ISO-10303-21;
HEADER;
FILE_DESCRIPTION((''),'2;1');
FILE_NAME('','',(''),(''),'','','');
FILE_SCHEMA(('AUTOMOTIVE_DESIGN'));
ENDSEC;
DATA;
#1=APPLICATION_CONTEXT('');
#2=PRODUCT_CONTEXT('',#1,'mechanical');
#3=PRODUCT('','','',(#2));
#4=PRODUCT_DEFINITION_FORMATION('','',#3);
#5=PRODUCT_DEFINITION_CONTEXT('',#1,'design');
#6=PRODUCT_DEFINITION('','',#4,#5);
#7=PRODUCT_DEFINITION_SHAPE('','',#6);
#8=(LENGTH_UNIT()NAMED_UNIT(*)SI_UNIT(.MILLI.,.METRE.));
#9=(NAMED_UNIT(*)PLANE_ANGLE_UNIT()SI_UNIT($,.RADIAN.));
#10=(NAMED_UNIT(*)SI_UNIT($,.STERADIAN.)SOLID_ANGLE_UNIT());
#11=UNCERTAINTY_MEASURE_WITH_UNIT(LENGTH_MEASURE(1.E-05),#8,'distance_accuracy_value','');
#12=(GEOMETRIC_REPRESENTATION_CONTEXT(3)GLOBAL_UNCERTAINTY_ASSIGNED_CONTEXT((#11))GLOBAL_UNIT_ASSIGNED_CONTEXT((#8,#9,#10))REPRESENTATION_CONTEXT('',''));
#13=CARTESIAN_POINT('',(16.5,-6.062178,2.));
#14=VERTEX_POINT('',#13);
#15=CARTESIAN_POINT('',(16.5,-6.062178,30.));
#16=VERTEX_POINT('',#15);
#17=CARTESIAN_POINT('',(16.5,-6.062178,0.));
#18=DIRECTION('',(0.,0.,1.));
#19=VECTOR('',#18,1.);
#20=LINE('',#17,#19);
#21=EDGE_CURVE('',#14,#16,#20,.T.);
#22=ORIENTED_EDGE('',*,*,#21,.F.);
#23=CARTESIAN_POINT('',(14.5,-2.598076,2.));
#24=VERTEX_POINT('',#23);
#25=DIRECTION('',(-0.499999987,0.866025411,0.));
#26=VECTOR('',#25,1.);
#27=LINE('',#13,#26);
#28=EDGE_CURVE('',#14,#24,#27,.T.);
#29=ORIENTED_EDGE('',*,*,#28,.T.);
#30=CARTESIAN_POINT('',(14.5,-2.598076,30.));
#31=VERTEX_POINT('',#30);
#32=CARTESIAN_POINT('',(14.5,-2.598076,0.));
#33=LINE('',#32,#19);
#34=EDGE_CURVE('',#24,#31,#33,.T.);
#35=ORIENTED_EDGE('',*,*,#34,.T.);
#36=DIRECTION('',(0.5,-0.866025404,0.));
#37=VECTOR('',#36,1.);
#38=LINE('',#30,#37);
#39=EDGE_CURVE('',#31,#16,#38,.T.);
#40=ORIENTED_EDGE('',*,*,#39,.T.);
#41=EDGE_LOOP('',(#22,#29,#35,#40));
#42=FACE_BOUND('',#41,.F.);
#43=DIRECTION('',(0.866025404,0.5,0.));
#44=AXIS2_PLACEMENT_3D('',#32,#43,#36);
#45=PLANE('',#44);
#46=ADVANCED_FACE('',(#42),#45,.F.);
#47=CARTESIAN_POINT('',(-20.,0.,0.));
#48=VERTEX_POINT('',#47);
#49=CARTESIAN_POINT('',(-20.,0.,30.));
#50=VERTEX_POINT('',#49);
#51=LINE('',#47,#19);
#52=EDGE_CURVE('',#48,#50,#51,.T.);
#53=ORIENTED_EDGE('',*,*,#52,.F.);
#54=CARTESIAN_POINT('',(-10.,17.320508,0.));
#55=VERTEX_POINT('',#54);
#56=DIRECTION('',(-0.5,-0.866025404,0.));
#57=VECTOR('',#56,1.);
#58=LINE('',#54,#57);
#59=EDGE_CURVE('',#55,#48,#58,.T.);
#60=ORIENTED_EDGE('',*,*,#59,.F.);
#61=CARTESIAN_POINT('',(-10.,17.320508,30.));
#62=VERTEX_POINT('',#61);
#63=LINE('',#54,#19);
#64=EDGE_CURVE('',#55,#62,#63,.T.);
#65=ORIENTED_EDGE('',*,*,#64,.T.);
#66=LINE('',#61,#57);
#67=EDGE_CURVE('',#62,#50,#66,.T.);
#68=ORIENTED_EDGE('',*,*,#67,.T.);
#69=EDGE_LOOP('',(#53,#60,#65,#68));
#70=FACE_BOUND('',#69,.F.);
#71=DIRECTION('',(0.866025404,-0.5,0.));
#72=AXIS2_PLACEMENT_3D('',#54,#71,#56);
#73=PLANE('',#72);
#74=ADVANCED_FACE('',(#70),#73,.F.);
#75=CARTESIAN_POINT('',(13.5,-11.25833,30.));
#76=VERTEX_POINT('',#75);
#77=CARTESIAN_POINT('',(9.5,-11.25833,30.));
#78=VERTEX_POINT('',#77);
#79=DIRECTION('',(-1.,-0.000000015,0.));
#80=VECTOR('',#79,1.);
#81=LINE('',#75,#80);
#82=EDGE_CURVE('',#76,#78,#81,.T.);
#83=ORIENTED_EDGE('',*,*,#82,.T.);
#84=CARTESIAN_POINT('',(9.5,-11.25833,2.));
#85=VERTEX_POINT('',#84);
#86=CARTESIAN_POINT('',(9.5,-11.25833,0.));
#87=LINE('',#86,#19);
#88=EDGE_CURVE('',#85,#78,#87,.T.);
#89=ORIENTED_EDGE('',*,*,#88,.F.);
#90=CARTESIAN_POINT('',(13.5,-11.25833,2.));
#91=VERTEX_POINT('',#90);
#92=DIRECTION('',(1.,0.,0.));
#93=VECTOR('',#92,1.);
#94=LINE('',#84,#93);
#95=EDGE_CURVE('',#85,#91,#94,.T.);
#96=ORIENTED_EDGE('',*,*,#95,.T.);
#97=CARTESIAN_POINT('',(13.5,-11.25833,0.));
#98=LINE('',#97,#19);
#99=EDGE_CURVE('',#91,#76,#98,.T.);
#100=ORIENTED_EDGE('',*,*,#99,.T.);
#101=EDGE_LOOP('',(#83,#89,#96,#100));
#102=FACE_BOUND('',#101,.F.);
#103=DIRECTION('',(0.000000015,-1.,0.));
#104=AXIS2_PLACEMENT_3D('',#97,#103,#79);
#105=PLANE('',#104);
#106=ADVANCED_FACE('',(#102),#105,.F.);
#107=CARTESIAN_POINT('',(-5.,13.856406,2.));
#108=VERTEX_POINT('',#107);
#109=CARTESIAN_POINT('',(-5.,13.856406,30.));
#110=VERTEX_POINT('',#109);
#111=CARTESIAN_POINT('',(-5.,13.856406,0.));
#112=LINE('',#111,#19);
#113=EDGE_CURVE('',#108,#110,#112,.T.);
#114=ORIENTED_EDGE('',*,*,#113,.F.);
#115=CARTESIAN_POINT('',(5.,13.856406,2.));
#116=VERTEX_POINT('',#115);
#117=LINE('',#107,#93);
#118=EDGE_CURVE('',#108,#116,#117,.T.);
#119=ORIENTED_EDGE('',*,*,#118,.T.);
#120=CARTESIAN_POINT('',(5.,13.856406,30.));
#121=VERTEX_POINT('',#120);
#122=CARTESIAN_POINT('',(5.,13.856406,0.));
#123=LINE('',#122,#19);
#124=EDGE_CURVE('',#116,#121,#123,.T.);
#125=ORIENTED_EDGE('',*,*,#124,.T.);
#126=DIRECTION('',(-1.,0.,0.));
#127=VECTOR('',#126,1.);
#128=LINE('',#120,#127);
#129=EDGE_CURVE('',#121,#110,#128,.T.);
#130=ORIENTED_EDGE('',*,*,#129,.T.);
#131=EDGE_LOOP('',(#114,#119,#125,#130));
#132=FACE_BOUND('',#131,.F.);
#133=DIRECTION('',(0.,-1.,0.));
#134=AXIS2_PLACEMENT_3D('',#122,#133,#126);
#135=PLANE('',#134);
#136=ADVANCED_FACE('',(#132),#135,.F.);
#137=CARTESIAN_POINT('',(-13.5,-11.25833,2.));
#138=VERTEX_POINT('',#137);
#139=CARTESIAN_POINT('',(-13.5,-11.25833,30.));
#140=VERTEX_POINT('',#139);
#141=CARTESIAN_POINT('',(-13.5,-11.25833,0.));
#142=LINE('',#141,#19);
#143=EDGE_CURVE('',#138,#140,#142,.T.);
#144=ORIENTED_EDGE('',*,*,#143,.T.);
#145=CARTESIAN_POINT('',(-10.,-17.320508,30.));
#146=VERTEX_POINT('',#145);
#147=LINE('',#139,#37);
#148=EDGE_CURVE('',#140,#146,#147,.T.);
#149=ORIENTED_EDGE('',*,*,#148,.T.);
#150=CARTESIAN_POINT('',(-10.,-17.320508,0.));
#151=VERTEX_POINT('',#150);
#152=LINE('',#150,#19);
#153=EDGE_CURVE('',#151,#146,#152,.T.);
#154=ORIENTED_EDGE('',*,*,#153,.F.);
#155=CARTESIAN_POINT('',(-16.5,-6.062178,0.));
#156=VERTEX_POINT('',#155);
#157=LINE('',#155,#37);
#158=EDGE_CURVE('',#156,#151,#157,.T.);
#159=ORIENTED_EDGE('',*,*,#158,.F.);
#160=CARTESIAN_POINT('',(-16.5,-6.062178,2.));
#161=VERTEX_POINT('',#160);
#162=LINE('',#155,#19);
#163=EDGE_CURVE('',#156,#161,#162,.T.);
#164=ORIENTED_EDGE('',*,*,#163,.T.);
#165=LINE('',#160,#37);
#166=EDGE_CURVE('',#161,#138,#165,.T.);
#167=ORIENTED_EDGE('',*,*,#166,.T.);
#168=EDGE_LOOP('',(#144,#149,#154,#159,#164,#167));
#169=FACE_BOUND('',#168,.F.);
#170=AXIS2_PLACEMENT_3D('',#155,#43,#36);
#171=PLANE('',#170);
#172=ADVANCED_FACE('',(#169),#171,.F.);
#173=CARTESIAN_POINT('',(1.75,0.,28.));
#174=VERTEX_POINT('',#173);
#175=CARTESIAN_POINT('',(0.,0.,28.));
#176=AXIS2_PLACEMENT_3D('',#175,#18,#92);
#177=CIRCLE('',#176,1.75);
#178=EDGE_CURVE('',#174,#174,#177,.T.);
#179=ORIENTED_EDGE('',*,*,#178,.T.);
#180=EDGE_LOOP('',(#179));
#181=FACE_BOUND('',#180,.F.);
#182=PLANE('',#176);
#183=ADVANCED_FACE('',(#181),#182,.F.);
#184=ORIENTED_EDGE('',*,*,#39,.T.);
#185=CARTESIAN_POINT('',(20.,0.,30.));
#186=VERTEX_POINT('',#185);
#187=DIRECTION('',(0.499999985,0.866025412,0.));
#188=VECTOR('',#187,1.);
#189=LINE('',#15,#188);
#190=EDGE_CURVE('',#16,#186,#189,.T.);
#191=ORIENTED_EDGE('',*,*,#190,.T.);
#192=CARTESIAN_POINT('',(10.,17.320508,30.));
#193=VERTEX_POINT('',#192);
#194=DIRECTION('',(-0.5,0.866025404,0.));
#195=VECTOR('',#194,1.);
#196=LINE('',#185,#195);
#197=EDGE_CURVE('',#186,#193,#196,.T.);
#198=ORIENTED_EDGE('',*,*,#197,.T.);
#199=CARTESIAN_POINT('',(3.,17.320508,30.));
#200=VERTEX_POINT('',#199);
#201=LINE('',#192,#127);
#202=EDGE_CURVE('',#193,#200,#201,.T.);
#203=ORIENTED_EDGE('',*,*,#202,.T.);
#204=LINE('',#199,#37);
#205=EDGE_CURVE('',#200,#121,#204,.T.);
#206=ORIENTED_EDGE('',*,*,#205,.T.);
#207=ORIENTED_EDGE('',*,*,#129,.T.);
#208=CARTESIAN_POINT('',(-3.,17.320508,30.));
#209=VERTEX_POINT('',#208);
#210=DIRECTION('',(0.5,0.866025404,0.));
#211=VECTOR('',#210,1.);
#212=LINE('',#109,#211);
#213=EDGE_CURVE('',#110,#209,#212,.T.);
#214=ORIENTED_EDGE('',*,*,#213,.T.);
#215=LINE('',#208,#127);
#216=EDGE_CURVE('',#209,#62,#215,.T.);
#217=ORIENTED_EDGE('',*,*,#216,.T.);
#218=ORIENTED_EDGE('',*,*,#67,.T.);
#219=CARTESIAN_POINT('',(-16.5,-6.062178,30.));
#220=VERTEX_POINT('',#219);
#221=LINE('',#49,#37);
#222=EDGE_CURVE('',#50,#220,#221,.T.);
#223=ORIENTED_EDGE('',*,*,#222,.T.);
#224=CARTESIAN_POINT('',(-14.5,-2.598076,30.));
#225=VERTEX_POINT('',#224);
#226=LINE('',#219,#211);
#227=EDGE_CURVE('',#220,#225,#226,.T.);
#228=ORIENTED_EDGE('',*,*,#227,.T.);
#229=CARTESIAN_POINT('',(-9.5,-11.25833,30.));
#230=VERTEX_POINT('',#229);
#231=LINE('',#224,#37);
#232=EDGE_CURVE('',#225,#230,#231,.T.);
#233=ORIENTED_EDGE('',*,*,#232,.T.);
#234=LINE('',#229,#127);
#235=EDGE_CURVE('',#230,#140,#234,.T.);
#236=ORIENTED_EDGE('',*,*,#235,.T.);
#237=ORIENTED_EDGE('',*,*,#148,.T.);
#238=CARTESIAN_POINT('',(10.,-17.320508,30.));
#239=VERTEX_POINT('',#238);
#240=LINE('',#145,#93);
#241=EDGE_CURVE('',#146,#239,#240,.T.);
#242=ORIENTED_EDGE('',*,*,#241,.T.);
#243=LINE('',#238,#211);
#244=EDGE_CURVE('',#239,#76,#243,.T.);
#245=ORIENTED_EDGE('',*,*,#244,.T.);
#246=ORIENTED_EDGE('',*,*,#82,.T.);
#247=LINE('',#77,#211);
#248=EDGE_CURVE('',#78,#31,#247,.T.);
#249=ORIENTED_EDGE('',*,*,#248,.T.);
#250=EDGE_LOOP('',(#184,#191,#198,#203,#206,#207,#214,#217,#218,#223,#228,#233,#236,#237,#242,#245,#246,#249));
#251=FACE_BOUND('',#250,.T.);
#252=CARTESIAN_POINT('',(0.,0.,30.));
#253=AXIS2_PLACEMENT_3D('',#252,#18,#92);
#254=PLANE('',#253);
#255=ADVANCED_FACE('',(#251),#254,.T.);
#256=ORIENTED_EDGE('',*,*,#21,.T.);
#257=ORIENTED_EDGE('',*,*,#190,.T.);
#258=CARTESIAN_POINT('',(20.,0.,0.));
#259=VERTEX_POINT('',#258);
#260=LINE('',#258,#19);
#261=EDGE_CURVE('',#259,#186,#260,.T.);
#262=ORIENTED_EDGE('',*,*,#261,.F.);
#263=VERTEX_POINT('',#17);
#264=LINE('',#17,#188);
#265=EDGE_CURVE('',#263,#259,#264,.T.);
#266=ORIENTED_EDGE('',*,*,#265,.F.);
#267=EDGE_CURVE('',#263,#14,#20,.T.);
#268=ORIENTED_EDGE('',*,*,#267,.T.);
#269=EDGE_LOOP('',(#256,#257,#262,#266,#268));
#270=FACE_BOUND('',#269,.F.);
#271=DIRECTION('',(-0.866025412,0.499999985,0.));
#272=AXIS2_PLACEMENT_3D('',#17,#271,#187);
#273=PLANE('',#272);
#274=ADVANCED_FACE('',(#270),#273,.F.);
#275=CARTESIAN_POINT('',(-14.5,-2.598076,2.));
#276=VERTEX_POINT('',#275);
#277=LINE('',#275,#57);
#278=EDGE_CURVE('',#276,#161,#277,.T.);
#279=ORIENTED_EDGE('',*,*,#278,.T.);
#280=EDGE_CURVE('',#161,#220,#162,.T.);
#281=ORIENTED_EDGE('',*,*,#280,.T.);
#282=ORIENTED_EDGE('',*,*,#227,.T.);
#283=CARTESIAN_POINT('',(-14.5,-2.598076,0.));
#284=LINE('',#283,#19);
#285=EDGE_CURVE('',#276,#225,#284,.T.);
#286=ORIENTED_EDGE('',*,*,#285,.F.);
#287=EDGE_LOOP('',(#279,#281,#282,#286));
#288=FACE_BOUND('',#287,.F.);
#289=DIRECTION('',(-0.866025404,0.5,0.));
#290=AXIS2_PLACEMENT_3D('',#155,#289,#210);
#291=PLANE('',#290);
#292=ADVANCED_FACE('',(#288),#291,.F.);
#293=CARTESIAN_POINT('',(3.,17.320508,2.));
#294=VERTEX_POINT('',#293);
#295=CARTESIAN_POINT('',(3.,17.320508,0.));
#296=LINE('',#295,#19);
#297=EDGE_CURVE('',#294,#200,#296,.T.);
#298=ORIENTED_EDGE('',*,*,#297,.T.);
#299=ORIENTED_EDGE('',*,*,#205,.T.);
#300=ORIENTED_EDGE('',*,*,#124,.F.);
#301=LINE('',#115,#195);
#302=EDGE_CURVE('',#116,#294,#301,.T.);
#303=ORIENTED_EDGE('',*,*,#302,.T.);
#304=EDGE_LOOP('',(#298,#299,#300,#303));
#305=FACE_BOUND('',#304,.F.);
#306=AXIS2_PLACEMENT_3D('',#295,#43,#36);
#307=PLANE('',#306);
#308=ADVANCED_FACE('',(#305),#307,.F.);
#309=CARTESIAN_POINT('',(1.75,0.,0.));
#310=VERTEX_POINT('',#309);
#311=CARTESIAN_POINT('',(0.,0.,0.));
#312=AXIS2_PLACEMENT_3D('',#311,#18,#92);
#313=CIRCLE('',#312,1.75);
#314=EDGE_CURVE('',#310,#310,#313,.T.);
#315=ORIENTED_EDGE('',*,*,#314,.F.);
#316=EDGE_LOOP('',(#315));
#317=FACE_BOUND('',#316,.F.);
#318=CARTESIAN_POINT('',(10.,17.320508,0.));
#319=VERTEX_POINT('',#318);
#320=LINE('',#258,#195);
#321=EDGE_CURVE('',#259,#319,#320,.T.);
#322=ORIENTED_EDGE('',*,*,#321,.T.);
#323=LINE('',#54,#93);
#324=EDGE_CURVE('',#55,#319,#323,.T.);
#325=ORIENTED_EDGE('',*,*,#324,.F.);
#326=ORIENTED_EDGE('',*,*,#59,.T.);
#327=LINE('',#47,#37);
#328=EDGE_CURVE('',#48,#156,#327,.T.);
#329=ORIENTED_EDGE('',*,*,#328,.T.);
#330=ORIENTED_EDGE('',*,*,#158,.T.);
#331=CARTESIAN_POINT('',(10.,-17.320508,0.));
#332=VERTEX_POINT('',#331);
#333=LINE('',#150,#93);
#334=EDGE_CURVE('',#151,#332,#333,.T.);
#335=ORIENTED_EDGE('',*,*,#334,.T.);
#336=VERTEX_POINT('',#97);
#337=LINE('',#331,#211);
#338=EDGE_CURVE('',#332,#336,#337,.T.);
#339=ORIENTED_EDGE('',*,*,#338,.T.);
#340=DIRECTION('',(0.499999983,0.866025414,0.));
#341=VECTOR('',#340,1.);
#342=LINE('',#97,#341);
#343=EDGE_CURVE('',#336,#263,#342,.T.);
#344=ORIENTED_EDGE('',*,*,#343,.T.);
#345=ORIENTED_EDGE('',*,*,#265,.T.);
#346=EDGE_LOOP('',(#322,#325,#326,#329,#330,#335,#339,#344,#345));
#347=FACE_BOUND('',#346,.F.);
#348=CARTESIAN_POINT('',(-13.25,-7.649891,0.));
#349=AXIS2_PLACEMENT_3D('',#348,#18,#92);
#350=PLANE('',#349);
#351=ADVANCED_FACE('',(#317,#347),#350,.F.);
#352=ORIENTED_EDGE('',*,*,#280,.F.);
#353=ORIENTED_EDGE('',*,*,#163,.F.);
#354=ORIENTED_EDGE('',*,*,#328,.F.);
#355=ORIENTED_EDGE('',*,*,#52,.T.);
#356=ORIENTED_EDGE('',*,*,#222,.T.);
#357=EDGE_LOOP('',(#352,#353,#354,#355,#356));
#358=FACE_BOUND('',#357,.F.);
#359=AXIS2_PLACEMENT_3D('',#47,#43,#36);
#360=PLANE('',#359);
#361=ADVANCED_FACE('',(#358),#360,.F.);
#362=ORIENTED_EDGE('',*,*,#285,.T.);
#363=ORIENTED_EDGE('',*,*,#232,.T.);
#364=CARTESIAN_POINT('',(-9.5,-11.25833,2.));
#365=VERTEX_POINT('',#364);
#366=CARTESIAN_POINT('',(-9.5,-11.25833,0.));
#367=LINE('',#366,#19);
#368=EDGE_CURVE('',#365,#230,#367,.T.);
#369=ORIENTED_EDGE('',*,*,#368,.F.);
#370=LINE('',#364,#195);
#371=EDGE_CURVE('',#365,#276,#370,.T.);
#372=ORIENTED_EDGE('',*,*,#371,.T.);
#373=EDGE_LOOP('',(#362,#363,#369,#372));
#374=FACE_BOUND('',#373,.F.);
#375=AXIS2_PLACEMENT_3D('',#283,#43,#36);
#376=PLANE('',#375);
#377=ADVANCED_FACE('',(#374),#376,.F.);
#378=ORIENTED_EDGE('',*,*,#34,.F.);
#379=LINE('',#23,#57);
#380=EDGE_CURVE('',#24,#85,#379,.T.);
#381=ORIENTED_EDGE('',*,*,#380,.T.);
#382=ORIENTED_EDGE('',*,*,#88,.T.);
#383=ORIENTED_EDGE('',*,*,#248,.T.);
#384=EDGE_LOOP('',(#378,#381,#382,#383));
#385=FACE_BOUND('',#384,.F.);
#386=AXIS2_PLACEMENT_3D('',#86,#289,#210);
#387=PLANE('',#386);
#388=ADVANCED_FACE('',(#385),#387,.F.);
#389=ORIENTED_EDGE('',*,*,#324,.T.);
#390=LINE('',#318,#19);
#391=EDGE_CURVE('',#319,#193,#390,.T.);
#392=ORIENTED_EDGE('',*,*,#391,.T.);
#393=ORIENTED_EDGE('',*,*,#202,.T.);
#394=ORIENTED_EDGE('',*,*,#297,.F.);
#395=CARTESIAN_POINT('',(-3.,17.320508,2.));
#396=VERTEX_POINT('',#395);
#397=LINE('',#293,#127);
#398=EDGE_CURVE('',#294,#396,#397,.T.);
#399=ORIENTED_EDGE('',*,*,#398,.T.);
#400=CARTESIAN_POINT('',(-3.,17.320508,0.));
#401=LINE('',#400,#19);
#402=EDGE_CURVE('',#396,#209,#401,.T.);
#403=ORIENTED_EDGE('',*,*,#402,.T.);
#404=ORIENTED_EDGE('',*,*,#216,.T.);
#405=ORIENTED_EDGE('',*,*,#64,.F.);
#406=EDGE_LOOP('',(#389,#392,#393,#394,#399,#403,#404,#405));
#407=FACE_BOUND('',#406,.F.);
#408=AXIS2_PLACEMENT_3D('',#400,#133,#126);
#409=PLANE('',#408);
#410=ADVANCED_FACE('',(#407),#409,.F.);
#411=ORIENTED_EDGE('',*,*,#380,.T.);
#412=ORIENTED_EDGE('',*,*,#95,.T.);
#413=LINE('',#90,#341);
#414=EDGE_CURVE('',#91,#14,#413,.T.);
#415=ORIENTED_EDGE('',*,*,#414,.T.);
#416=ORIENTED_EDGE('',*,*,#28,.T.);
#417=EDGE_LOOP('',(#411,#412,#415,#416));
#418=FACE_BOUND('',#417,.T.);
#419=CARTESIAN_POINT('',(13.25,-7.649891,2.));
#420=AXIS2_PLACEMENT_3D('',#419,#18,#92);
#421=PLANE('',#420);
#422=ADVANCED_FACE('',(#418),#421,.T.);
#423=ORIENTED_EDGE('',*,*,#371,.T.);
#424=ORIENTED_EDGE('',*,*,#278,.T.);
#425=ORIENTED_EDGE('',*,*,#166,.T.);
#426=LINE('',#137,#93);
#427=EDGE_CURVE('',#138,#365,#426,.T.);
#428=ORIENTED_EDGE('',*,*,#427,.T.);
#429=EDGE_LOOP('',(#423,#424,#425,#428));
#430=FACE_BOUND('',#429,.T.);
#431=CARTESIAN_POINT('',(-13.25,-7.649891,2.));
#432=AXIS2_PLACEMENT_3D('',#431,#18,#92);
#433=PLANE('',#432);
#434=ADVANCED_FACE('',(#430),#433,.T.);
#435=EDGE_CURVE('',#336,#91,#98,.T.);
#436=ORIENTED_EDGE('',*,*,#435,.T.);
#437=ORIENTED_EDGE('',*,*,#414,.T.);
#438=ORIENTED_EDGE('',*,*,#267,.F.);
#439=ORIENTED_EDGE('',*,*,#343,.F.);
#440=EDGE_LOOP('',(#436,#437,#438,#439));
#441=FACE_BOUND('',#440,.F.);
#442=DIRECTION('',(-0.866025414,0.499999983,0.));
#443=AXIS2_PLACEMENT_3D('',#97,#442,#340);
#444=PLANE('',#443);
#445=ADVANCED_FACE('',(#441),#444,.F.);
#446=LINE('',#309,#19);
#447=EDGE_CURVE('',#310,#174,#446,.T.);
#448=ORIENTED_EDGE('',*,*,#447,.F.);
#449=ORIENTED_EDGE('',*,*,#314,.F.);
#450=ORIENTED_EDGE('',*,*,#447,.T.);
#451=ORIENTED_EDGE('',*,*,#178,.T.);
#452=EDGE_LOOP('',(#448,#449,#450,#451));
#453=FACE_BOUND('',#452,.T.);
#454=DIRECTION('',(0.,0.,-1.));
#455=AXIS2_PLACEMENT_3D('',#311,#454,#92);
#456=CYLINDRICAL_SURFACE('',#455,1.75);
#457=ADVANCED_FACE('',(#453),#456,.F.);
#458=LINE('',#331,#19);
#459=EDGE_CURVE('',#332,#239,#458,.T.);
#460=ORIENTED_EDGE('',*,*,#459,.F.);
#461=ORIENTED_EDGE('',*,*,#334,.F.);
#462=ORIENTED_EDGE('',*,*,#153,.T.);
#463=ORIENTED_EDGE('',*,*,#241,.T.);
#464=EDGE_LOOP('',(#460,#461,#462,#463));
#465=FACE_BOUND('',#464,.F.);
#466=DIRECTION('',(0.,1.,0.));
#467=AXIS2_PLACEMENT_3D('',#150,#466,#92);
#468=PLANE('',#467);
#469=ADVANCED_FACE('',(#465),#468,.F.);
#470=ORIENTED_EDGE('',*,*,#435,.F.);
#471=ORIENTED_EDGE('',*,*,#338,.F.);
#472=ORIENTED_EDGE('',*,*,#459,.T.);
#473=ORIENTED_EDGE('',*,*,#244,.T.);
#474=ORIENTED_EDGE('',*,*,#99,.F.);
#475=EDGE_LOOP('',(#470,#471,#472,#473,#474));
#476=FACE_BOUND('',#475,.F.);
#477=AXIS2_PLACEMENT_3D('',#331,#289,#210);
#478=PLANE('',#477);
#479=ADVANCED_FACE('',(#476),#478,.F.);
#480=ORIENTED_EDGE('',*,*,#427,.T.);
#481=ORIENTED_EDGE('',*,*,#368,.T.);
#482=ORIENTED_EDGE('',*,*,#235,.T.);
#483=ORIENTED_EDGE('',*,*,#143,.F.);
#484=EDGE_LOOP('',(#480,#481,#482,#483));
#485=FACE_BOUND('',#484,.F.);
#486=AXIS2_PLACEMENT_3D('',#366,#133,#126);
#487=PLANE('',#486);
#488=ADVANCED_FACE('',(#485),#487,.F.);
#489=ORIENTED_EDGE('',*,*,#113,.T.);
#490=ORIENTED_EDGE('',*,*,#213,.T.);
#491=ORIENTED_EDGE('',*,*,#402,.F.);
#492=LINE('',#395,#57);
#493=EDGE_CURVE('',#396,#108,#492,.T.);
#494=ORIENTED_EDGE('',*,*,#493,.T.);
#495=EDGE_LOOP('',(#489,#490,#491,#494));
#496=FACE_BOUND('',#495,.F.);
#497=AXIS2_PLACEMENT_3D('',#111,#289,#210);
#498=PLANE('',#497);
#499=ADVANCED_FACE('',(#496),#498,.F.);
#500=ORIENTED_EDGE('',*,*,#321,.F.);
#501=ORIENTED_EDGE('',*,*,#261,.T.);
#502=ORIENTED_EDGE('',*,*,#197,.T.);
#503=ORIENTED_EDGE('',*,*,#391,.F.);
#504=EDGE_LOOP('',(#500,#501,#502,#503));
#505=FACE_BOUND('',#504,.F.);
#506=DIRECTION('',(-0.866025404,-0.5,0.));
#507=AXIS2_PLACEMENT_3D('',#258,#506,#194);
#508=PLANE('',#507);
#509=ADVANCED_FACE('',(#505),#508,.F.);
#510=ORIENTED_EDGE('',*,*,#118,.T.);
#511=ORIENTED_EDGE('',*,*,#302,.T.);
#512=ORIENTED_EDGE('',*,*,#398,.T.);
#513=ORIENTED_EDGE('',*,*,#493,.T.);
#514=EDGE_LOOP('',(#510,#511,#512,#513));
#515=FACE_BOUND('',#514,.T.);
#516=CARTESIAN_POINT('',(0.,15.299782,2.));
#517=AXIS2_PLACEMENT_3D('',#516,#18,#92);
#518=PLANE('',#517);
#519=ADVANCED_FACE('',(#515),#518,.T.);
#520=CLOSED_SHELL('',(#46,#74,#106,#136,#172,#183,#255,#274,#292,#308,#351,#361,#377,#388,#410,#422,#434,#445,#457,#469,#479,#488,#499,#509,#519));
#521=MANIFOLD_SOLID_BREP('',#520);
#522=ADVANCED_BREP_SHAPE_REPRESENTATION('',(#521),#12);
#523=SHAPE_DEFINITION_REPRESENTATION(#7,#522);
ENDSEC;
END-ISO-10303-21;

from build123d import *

# Parameters (mm, degrees)
F0_R     = 1.75
F1_DEPTH = 30
F2_DEPTH = 2
F3_START = 28
F3_DEPTH = 2


# Not quite as in the source:
# - ends of sketch curves that miss each other by under 0.0002 mm in the source are joined


with BuildPart() as f1:
    # F0 (on Top) → F1 (new body)
    with BuildSketch(Plane.XY):
        Polygon((-10, -17.3205080757), (10, -17.3205080757), (13.500000035, -11.2583301886), (9.5000001398, -11.2583302492), (14.5000001398, -2.5980762114), (16.5000001398, -6.0621778265), (20, 0), (10, 17.3205080757), (3, 17.3205080757), (5, 13.8564064606), (-5, 13.8564064606), (-3, 17.3205080757), (-10, 17.3205080757), (-20, 0), (-16.4999999301, -6.0621779476), (-14.4999999301, -2.5980763325), (-9.4999999301, -11.2583303703), (-13.4999999301, -11.2583303703), align=None)
        Circle(F0_R, mode=Mode.SUBTRACT)
    extrude(amount=F1_DEPTH)

    # F0 (on Top) → F2 (join)
    with BuildSketch(Plane.XY):
        Polygon((-16.4999999301, -6.0621779476), (-13.4999999301, -11.2583303703), (-9.4999999301, -11.2583303703), (-14.4999999301, -2.5980763325), align=None)
        Polygon((5, 13.8564064606), (3, 17.3205080757), (-3, 17.3205080757), (-5, 13.8564064606), align=None)
        Polygon((9.5000001398, -11.2583302492), (13.5000001398, -11.2583302492), (16.500000035, -6.0621777659), (14.5000001398, -2.5980762114), align=None)
    extrude(amount=F2_DEPTH)

    # F0 (on Top) → F3 (join)
    with BuildSketch(Plane.XY.offset(F3_START)):
        Circle(F0_R)
    extrude(amount=F3_DEPTH)


solid = f1.part
